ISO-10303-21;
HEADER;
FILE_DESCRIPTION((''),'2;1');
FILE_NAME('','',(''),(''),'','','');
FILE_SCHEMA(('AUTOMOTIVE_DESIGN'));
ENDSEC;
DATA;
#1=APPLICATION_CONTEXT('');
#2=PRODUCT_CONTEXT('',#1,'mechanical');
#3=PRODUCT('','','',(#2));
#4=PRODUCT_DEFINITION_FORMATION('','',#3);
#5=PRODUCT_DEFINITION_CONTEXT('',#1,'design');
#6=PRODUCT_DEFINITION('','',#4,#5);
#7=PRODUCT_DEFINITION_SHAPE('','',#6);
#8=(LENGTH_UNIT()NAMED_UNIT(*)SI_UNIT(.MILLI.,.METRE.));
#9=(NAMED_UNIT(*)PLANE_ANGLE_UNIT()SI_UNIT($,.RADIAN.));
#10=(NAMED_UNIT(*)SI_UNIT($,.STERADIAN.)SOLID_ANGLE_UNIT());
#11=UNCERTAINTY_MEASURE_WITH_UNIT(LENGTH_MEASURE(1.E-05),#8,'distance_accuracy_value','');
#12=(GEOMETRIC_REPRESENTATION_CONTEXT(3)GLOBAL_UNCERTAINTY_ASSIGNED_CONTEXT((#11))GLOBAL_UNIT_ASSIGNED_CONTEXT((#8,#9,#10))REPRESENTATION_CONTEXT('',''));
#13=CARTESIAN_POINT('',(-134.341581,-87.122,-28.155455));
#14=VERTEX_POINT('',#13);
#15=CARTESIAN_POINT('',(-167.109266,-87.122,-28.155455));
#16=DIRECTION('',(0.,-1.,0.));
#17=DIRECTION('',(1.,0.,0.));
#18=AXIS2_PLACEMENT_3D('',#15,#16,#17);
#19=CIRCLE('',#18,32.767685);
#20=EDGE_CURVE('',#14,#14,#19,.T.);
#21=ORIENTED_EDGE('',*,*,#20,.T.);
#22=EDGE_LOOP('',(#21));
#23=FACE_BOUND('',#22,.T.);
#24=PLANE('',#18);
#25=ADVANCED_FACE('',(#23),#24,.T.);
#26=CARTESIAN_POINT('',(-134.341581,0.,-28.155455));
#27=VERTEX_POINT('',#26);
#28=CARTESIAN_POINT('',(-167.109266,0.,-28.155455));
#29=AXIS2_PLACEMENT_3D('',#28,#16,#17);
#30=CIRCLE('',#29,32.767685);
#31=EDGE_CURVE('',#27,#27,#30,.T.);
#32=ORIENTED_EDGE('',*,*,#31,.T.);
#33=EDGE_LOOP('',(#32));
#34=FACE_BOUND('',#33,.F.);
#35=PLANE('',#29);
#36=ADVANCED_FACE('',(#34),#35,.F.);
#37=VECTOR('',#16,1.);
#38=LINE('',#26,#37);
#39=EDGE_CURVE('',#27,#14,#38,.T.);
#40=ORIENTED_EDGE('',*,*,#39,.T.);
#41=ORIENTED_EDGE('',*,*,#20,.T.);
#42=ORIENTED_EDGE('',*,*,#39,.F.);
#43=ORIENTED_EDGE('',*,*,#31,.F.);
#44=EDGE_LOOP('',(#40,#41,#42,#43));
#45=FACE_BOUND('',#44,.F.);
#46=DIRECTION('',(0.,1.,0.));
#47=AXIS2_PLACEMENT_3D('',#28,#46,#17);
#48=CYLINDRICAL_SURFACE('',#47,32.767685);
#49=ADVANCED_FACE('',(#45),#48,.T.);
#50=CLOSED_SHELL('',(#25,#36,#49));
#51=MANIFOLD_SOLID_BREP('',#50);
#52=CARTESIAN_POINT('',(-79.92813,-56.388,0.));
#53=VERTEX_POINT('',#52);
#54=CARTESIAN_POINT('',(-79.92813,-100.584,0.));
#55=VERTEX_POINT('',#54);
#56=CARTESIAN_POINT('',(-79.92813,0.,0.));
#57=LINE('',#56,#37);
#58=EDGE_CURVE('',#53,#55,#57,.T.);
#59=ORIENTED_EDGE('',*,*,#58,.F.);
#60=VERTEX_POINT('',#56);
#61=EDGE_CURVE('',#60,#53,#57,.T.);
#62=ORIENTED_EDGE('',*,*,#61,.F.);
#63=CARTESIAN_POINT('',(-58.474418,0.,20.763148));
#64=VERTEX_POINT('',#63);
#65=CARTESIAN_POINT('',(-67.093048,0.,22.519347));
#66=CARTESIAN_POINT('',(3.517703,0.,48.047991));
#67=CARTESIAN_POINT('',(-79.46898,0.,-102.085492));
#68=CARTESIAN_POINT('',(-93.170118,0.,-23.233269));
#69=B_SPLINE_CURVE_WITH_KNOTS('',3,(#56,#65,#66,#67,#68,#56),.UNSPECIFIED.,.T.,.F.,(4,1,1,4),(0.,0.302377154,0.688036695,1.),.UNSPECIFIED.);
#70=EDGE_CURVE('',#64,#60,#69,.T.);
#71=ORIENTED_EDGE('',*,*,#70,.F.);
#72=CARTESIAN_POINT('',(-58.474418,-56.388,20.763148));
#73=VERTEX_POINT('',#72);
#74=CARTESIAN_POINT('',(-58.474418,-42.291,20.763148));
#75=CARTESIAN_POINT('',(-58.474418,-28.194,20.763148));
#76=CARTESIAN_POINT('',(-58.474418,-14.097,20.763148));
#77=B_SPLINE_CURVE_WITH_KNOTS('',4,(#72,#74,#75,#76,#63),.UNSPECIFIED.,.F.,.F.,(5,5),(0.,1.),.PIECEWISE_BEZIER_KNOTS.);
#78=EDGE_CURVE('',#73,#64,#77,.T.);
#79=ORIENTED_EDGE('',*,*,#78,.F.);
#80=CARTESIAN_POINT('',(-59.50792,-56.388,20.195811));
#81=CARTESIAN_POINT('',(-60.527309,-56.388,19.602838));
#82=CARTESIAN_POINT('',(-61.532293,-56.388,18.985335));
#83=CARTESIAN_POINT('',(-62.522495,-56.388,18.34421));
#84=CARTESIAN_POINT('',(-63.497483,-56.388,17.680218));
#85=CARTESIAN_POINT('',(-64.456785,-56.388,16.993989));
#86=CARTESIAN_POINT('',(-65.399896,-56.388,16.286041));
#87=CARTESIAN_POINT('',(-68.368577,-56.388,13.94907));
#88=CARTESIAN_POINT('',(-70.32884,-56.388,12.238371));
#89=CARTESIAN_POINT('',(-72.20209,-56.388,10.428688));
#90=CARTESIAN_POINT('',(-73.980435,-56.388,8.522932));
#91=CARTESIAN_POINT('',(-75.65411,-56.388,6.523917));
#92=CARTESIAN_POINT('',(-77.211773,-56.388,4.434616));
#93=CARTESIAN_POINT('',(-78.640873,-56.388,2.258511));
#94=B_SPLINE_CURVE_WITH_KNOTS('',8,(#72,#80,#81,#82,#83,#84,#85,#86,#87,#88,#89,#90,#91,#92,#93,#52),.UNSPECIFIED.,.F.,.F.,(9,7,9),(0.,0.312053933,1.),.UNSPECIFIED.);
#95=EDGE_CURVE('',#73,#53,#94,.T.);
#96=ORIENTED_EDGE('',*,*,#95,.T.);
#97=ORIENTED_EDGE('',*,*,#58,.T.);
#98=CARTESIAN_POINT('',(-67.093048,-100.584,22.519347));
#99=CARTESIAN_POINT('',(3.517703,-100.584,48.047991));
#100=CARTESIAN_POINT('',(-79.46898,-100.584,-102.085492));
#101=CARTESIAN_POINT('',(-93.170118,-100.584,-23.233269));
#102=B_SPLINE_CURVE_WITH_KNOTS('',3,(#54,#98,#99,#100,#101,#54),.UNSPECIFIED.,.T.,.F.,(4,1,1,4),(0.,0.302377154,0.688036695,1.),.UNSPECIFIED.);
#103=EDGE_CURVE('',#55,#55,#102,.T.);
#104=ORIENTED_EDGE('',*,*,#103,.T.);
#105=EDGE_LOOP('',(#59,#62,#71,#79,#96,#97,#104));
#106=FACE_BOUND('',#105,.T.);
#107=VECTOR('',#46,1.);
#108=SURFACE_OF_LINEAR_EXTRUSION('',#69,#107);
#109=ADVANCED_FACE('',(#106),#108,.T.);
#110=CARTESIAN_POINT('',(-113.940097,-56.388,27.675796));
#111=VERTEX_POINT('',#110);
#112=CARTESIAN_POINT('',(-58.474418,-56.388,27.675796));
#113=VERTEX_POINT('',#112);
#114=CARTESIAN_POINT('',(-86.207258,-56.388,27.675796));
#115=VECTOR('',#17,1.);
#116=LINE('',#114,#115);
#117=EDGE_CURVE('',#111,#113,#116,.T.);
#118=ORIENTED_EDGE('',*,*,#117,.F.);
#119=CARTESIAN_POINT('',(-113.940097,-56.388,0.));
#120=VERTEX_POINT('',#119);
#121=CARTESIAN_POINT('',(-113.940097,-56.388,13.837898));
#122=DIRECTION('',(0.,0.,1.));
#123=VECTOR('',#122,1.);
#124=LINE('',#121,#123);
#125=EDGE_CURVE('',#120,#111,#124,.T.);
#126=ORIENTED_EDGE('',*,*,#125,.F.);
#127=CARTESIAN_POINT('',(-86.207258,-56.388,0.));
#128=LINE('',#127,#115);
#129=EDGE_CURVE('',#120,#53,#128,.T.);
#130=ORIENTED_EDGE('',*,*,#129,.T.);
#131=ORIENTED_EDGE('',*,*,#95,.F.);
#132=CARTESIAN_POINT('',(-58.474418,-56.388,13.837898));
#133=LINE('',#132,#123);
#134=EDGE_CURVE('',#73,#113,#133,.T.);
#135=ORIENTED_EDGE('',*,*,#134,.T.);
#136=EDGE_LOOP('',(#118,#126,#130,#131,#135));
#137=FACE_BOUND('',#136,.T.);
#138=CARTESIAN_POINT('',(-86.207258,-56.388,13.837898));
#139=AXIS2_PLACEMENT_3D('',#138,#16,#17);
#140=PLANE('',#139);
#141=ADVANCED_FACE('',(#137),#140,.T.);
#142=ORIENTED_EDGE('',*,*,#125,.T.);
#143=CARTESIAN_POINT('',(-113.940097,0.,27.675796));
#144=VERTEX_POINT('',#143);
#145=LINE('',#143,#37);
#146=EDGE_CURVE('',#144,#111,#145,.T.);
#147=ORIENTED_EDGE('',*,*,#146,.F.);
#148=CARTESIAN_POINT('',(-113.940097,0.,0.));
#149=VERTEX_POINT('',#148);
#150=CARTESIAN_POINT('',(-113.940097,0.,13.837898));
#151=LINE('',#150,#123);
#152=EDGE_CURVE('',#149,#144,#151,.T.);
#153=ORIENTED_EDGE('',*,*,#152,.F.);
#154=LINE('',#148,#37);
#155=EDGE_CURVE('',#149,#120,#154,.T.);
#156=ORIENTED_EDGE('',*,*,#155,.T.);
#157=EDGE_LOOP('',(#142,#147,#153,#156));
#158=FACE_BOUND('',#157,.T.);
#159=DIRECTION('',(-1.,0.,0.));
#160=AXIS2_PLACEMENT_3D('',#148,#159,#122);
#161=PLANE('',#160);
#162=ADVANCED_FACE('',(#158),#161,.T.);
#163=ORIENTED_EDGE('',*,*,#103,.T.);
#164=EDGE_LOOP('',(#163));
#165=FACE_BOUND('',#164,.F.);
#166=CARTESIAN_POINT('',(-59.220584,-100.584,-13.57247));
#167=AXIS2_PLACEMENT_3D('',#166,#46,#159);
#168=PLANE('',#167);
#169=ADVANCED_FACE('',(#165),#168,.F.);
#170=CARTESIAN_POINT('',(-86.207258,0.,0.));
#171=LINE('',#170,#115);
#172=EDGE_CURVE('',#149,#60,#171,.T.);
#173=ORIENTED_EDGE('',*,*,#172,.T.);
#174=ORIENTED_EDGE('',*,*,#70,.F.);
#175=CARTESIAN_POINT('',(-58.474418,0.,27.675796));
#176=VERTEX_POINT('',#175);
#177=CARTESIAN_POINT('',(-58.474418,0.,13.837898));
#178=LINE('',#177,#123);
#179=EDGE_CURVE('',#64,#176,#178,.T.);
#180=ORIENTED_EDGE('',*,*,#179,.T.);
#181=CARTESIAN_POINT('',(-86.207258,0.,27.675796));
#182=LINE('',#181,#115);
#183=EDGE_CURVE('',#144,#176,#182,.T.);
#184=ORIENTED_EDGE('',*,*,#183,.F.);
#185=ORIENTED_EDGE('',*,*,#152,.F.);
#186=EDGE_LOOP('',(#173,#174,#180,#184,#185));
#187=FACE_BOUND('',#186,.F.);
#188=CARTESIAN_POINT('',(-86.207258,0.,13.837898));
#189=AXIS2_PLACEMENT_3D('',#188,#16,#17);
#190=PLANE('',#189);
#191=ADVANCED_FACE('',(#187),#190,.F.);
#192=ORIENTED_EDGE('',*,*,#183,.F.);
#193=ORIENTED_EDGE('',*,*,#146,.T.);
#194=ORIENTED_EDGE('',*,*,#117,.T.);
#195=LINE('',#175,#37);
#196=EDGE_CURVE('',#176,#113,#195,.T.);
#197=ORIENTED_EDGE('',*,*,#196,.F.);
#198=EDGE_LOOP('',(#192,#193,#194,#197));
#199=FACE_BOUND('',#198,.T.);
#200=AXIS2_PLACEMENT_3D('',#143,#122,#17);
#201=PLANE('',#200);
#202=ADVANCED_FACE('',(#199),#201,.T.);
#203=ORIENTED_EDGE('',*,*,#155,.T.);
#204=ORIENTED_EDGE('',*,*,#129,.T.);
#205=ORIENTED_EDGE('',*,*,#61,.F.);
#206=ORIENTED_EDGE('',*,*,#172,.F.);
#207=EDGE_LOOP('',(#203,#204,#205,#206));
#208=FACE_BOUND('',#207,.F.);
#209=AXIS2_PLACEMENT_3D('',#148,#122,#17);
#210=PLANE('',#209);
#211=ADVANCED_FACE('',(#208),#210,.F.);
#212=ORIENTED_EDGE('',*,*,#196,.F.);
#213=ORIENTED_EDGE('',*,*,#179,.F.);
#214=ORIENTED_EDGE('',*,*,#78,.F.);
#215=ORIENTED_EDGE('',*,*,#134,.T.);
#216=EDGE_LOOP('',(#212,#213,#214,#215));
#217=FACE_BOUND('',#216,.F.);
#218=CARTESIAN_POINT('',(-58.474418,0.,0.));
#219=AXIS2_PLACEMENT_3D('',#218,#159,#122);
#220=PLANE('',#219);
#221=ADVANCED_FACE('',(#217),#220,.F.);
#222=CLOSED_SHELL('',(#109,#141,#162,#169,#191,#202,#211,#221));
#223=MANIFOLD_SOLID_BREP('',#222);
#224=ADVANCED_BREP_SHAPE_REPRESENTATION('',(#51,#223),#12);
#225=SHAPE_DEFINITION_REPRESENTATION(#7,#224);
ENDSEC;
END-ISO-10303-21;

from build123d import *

# Parameters (mm, degrees)
F0_W     = 55.4656796157
F0_H     = 27.6757963002
F1_DEPTH = 56.388
F3_DEPTH = 100.584
F4_R     = 32.7676848389
F5_DEPTH = 87.122


# Not quite as in the source:
# - the program builds the solid bodies; features that only make, move or delete a surface that nothing else refers to are left out


with BuildPart() as f1:
    # F0 (on Front) → F1 (new body)
    with BuildSketch(Plane.XZ):
        with Locations((-86.2072575837, 13.8378981501)):
            Rectangle(F0_W, F0_H)
    extrude(amount=F1_DEPTH)

    # F2 (on Front) → F3 (join)
    with BuildSketch(Plane.XZ):
        with BuildLine():
            add(Edge.make_bspline(
                [(-79.9281299114, 0), (-67.0930481433, 22.5193468072), (3.5177028216, 48.0479908411), (-79.4689797754, -102.0854924294), (-93.1701175455, -23.2332693579), (-79.9281299114, 0)],
                knots=[0, 0, 0, 0, 0.3023771538, 0.6880366948, 1, 1, 1, 1], degree=3))
        make_face()
    extrude(amount=F3_DEPTH)


with BuildPart() as f5:
    # F4 (on Front) → F5 (new body)
    with BuildSketch(Plane.XZ):
        with Locations((-167.1092659235, -28.1554553658)):
            Circle(F4_R)
    extrude(amount=F5_DEPTH)


solid = Compound([f1.part, f5.part])
